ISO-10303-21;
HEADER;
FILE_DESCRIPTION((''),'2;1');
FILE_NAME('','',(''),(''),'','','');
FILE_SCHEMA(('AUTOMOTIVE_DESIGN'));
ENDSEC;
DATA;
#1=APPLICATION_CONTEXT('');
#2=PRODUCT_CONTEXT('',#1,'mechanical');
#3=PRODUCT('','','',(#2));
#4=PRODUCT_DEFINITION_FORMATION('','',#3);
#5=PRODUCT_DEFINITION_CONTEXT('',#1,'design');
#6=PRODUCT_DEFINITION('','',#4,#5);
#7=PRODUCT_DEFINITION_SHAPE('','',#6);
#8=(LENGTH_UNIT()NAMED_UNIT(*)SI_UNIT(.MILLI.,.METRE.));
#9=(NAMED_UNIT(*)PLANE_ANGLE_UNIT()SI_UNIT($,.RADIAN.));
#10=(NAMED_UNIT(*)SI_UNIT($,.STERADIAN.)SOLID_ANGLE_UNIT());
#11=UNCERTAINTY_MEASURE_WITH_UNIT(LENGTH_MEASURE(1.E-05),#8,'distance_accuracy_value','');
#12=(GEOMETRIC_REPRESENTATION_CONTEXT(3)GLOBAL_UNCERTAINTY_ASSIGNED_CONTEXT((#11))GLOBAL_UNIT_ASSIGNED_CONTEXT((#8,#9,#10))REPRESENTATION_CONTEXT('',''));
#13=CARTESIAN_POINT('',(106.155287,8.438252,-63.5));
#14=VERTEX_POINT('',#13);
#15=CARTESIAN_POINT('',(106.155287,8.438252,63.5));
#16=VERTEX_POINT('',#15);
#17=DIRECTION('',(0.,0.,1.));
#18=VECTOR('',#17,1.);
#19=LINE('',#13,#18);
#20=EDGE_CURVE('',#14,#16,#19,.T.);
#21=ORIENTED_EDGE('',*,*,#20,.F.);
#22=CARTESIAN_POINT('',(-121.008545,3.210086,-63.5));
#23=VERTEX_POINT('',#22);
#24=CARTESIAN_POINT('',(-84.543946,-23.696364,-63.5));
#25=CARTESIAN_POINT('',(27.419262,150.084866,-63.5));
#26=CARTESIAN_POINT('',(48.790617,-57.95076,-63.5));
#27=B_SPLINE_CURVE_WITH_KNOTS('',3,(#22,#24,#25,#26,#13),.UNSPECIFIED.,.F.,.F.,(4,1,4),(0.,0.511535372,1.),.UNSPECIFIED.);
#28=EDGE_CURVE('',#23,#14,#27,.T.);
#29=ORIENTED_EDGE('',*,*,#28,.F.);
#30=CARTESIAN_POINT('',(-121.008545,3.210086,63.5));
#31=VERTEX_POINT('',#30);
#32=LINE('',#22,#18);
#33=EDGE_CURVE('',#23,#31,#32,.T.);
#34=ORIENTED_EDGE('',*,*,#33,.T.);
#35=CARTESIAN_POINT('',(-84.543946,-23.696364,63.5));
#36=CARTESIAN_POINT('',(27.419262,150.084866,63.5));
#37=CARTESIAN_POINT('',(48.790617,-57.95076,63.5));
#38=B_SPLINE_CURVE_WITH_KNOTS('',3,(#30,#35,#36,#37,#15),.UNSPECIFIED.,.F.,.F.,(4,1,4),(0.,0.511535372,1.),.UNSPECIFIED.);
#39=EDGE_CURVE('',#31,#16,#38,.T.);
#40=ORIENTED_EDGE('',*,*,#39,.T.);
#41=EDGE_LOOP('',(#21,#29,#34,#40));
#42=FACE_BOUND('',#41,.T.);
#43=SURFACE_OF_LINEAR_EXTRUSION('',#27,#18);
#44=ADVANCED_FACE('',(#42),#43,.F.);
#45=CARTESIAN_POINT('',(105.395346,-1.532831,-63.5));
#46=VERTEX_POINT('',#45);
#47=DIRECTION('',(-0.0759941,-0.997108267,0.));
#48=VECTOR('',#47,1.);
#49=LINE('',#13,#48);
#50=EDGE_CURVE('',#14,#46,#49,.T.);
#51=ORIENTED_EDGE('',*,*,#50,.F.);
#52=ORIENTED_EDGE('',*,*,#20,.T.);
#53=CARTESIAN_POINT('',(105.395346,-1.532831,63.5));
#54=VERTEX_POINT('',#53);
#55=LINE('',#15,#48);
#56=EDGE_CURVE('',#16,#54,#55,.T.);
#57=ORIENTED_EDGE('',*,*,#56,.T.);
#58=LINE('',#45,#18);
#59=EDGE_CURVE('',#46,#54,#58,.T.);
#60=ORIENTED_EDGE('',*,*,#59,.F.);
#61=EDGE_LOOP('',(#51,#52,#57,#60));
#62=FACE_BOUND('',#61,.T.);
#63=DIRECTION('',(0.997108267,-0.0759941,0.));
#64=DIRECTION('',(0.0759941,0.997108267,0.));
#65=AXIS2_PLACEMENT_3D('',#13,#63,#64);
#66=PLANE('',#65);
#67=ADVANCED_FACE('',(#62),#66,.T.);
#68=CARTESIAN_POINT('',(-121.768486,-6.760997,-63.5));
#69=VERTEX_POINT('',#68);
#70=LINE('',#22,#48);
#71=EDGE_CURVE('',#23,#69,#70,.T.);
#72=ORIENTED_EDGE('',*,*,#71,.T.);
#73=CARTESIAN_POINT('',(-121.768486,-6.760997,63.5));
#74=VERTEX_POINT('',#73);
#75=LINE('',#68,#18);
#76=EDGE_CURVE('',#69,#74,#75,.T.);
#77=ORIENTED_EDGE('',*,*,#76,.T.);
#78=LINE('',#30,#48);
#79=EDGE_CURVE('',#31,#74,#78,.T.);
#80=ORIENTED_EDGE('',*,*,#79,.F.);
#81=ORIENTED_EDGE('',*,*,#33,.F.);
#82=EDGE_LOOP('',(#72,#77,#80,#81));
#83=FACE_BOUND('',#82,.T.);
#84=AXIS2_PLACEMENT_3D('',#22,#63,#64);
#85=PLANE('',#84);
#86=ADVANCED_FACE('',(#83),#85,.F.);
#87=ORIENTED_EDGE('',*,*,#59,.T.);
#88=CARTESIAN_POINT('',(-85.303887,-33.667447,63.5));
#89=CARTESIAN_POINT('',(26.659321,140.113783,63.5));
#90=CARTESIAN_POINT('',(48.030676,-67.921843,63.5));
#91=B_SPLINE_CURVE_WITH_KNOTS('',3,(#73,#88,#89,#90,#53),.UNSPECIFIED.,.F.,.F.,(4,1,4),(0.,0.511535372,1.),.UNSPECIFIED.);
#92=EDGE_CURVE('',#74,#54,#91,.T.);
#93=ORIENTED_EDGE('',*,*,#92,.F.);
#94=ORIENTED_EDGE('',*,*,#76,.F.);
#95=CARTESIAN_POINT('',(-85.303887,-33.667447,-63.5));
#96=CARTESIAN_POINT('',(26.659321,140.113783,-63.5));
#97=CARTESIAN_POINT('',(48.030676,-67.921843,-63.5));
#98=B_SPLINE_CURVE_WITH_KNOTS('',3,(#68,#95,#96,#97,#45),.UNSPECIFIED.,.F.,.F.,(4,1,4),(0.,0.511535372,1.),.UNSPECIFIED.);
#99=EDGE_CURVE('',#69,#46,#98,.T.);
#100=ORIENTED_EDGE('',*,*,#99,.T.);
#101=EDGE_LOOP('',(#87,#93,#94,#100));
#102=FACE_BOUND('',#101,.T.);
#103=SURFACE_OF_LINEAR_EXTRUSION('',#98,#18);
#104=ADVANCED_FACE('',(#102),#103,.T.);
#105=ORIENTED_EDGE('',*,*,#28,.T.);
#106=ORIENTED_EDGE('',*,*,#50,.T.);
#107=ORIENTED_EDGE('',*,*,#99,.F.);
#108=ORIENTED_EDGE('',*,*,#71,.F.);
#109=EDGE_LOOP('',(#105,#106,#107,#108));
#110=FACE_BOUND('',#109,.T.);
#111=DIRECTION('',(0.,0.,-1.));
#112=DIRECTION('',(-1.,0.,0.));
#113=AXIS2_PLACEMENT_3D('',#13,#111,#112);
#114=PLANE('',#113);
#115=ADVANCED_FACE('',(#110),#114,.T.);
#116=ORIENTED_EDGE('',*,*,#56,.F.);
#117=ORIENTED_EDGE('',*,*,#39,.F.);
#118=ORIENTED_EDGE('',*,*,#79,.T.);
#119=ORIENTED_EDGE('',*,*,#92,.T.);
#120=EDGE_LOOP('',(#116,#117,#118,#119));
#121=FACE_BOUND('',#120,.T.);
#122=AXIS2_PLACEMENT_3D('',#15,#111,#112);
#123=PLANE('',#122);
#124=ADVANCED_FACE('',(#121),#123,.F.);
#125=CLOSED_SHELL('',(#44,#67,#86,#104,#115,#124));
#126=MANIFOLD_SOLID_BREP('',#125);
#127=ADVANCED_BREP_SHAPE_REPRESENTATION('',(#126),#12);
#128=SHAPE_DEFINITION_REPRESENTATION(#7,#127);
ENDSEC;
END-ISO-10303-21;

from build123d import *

# Parameters (mm, degrees)
THICKEN_START   = -63.5
THICKEN_2_DEPTH = 127


# Read off the part's stored shape, not the designer's step: 加厚2
with BuildPart() as part:
    # 加厚2 outline → 加厚2 (new body)
    with BuildSketch(Plane.XY.offset(THICKEN_START)):
        with BuildLine():
            Line((-121.008544537, 3.210085688), (-121.768485532, -6.760996985))
            add(Edge.make_bspline(
                [(-121.768485532, -6.760996985), (-85.303886584, -33.667446883), (26.659320602, 140.113783309), (48.030675933, -67.921842841), (105.395345513, -1.532830563)],
                knots=[0, 0, 0, 0, 0.511535372, 1, 1, 1, 1], degree=3))
            Line((105.395345513, -1.532830563), (106.155286508, 8.43825211))
            add(Edge.make_bspline(
                [(-121.008544537, 3.210085688), (-84.543945589, -23.69636421), (27.419261597, 150.084865983), (48.790616929, -57.950760167), (106.155286508, 8.43825211)],
                knots=[0, 0, 0, 0, 0.511535372, 1, 1, 1, 1], degree=3))
        make_face()
    extrude(amount=THICKEN_2_DEPTH)


solid = part.part
